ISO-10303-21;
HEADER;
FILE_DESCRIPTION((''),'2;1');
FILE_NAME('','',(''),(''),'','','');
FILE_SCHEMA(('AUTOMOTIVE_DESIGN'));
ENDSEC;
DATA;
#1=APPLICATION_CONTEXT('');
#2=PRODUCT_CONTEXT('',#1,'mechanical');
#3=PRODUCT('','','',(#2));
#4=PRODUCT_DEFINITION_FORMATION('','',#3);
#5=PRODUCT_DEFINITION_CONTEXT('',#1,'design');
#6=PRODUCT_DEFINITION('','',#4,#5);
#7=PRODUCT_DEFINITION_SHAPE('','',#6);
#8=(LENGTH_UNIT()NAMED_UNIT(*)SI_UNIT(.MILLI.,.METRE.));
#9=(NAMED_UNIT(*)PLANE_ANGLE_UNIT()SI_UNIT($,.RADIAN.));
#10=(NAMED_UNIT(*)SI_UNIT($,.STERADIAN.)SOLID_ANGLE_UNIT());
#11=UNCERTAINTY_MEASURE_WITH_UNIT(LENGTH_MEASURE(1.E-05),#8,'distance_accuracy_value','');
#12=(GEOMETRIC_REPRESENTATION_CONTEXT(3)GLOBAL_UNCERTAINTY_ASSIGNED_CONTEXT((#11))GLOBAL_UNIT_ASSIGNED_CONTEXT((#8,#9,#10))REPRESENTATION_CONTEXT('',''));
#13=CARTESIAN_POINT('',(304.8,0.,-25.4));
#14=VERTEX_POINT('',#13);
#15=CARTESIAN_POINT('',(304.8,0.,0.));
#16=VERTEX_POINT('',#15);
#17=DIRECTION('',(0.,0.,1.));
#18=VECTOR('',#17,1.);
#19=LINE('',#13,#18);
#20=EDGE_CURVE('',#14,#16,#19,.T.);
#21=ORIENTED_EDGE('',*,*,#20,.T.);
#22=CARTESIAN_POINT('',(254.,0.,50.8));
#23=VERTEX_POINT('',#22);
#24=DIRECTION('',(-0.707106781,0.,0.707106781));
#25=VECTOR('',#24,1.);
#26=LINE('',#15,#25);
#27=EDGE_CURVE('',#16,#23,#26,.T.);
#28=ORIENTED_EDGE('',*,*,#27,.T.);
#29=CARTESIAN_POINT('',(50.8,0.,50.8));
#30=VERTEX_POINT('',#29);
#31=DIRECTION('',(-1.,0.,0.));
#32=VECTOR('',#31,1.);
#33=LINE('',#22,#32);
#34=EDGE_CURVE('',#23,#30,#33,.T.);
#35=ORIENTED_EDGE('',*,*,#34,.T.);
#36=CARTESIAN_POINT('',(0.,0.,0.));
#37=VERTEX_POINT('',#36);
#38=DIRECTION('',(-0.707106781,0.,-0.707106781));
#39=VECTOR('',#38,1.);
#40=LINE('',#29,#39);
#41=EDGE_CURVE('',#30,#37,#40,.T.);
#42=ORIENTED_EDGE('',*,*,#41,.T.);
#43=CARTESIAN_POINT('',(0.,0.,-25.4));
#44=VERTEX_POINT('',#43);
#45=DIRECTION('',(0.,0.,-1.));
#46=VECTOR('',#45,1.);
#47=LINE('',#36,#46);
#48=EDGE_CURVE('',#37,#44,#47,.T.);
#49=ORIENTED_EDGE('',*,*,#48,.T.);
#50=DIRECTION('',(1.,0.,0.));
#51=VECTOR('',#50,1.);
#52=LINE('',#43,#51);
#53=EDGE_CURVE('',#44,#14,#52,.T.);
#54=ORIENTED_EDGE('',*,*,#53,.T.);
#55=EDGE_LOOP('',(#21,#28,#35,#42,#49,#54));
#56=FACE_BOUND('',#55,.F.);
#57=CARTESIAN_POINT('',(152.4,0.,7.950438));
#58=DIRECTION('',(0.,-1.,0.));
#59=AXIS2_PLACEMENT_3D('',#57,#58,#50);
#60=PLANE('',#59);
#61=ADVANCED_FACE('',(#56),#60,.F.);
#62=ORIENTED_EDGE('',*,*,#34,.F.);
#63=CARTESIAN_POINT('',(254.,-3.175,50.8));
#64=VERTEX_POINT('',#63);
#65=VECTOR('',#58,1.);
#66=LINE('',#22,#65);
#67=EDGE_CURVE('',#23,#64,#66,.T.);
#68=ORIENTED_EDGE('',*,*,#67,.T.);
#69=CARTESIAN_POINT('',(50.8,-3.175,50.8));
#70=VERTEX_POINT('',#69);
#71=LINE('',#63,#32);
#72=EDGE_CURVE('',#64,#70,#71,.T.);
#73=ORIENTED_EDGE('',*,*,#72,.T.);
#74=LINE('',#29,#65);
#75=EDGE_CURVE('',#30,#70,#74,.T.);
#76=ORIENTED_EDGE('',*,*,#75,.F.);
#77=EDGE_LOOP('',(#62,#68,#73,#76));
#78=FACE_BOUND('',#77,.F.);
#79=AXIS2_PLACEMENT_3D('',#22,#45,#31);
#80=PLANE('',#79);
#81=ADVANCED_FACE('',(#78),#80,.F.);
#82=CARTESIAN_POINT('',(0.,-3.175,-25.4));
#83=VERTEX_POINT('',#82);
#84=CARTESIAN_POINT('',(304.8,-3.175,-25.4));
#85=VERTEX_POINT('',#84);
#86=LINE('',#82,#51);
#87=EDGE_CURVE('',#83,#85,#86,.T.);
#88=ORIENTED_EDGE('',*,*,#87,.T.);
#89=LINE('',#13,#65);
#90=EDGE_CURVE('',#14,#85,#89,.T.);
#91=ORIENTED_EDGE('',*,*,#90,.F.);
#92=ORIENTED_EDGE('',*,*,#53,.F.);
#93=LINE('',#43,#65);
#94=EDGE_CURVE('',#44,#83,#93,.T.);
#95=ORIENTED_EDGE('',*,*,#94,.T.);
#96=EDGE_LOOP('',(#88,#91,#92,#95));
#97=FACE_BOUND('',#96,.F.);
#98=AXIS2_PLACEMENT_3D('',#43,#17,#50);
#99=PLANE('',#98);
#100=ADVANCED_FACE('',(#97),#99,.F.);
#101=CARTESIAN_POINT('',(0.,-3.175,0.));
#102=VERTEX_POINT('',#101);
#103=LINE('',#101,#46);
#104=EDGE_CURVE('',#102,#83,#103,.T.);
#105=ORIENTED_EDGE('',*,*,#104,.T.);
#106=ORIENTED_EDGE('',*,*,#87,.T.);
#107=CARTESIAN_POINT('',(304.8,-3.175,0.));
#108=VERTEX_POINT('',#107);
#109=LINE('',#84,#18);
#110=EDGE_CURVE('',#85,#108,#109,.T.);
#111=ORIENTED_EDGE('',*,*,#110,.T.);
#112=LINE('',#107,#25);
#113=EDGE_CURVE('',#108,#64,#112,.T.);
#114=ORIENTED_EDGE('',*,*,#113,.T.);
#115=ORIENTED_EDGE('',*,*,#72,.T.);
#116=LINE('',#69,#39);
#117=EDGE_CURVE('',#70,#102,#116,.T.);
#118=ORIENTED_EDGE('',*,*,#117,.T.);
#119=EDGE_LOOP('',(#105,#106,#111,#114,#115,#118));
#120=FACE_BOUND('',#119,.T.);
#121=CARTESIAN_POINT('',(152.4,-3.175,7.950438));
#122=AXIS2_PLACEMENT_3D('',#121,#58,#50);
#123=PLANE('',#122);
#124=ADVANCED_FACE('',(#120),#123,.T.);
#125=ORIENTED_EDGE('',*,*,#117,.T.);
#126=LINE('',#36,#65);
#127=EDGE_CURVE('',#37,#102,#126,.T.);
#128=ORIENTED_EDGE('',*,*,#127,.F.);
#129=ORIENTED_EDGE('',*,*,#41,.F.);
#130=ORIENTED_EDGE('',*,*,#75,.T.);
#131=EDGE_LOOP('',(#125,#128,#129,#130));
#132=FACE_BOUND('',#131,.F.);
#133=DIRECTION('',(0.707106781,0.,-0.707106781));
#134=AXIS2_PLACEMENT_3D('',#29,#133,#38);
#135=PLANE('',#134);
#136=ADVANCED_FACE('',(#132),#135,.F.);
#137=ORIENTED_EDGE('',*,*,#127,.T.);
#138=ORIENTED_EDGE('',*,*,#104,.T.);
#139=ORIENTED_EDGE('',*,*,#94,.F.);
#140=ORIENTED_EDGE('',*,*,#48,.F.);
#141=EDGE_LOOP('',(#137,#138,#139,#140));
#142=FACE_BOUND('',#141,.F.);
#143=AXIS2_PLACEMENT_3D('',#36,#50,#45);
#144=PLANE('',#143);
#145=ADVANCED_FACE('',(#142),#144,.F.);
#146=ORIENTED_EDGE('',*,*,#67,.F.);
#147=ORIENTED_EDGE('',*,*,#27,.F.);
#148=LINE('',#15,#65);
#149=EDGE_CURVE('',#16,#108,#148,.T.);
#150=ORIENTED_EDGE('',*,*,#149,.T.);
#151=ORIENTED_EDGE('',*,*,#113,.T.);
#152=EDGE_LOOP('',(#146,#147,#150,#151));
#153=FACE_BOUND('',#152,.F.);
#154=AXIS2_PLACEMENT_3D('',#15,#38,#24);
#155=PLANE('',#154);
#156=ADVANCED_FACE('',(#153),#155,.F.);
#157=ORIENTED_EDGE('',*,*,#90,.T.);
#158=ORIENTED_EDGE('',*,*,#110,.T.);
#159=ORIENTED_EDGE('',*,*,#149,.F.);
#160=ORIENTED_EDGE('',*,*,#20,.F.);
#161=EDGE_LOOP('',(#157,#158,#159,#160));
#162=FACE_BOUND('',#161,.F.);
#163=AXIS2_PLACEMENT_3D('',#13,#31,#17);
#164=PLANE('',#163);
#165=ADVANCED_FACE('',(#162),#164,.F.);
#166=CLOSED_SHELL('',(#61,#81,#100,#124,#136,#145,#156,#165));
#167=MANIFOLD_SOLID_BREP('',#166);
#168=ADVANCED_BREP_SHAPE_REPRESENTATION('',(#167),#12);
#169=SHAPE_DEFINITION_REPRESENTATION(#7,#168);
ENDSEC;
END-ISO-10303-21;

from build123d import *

# Parameters (mm, degrees)
F1_DEPTH = 3.175


# Not quite as in the source:
# - a feature names something its author has since deleted; it is built from what else it names


with BuildPart() as f1:
    # F0 (on Front) → F1 (new body)
    with BuildSketch(Plane.XZ):
        Polygon((304.8, -25.4), (304.8, 0), (254, 50.8), (50.8, 50.8), (0, 0), (0, -25.4), align=None)
    extrude(amount=F1_DEPTH)


solid = f1.part
